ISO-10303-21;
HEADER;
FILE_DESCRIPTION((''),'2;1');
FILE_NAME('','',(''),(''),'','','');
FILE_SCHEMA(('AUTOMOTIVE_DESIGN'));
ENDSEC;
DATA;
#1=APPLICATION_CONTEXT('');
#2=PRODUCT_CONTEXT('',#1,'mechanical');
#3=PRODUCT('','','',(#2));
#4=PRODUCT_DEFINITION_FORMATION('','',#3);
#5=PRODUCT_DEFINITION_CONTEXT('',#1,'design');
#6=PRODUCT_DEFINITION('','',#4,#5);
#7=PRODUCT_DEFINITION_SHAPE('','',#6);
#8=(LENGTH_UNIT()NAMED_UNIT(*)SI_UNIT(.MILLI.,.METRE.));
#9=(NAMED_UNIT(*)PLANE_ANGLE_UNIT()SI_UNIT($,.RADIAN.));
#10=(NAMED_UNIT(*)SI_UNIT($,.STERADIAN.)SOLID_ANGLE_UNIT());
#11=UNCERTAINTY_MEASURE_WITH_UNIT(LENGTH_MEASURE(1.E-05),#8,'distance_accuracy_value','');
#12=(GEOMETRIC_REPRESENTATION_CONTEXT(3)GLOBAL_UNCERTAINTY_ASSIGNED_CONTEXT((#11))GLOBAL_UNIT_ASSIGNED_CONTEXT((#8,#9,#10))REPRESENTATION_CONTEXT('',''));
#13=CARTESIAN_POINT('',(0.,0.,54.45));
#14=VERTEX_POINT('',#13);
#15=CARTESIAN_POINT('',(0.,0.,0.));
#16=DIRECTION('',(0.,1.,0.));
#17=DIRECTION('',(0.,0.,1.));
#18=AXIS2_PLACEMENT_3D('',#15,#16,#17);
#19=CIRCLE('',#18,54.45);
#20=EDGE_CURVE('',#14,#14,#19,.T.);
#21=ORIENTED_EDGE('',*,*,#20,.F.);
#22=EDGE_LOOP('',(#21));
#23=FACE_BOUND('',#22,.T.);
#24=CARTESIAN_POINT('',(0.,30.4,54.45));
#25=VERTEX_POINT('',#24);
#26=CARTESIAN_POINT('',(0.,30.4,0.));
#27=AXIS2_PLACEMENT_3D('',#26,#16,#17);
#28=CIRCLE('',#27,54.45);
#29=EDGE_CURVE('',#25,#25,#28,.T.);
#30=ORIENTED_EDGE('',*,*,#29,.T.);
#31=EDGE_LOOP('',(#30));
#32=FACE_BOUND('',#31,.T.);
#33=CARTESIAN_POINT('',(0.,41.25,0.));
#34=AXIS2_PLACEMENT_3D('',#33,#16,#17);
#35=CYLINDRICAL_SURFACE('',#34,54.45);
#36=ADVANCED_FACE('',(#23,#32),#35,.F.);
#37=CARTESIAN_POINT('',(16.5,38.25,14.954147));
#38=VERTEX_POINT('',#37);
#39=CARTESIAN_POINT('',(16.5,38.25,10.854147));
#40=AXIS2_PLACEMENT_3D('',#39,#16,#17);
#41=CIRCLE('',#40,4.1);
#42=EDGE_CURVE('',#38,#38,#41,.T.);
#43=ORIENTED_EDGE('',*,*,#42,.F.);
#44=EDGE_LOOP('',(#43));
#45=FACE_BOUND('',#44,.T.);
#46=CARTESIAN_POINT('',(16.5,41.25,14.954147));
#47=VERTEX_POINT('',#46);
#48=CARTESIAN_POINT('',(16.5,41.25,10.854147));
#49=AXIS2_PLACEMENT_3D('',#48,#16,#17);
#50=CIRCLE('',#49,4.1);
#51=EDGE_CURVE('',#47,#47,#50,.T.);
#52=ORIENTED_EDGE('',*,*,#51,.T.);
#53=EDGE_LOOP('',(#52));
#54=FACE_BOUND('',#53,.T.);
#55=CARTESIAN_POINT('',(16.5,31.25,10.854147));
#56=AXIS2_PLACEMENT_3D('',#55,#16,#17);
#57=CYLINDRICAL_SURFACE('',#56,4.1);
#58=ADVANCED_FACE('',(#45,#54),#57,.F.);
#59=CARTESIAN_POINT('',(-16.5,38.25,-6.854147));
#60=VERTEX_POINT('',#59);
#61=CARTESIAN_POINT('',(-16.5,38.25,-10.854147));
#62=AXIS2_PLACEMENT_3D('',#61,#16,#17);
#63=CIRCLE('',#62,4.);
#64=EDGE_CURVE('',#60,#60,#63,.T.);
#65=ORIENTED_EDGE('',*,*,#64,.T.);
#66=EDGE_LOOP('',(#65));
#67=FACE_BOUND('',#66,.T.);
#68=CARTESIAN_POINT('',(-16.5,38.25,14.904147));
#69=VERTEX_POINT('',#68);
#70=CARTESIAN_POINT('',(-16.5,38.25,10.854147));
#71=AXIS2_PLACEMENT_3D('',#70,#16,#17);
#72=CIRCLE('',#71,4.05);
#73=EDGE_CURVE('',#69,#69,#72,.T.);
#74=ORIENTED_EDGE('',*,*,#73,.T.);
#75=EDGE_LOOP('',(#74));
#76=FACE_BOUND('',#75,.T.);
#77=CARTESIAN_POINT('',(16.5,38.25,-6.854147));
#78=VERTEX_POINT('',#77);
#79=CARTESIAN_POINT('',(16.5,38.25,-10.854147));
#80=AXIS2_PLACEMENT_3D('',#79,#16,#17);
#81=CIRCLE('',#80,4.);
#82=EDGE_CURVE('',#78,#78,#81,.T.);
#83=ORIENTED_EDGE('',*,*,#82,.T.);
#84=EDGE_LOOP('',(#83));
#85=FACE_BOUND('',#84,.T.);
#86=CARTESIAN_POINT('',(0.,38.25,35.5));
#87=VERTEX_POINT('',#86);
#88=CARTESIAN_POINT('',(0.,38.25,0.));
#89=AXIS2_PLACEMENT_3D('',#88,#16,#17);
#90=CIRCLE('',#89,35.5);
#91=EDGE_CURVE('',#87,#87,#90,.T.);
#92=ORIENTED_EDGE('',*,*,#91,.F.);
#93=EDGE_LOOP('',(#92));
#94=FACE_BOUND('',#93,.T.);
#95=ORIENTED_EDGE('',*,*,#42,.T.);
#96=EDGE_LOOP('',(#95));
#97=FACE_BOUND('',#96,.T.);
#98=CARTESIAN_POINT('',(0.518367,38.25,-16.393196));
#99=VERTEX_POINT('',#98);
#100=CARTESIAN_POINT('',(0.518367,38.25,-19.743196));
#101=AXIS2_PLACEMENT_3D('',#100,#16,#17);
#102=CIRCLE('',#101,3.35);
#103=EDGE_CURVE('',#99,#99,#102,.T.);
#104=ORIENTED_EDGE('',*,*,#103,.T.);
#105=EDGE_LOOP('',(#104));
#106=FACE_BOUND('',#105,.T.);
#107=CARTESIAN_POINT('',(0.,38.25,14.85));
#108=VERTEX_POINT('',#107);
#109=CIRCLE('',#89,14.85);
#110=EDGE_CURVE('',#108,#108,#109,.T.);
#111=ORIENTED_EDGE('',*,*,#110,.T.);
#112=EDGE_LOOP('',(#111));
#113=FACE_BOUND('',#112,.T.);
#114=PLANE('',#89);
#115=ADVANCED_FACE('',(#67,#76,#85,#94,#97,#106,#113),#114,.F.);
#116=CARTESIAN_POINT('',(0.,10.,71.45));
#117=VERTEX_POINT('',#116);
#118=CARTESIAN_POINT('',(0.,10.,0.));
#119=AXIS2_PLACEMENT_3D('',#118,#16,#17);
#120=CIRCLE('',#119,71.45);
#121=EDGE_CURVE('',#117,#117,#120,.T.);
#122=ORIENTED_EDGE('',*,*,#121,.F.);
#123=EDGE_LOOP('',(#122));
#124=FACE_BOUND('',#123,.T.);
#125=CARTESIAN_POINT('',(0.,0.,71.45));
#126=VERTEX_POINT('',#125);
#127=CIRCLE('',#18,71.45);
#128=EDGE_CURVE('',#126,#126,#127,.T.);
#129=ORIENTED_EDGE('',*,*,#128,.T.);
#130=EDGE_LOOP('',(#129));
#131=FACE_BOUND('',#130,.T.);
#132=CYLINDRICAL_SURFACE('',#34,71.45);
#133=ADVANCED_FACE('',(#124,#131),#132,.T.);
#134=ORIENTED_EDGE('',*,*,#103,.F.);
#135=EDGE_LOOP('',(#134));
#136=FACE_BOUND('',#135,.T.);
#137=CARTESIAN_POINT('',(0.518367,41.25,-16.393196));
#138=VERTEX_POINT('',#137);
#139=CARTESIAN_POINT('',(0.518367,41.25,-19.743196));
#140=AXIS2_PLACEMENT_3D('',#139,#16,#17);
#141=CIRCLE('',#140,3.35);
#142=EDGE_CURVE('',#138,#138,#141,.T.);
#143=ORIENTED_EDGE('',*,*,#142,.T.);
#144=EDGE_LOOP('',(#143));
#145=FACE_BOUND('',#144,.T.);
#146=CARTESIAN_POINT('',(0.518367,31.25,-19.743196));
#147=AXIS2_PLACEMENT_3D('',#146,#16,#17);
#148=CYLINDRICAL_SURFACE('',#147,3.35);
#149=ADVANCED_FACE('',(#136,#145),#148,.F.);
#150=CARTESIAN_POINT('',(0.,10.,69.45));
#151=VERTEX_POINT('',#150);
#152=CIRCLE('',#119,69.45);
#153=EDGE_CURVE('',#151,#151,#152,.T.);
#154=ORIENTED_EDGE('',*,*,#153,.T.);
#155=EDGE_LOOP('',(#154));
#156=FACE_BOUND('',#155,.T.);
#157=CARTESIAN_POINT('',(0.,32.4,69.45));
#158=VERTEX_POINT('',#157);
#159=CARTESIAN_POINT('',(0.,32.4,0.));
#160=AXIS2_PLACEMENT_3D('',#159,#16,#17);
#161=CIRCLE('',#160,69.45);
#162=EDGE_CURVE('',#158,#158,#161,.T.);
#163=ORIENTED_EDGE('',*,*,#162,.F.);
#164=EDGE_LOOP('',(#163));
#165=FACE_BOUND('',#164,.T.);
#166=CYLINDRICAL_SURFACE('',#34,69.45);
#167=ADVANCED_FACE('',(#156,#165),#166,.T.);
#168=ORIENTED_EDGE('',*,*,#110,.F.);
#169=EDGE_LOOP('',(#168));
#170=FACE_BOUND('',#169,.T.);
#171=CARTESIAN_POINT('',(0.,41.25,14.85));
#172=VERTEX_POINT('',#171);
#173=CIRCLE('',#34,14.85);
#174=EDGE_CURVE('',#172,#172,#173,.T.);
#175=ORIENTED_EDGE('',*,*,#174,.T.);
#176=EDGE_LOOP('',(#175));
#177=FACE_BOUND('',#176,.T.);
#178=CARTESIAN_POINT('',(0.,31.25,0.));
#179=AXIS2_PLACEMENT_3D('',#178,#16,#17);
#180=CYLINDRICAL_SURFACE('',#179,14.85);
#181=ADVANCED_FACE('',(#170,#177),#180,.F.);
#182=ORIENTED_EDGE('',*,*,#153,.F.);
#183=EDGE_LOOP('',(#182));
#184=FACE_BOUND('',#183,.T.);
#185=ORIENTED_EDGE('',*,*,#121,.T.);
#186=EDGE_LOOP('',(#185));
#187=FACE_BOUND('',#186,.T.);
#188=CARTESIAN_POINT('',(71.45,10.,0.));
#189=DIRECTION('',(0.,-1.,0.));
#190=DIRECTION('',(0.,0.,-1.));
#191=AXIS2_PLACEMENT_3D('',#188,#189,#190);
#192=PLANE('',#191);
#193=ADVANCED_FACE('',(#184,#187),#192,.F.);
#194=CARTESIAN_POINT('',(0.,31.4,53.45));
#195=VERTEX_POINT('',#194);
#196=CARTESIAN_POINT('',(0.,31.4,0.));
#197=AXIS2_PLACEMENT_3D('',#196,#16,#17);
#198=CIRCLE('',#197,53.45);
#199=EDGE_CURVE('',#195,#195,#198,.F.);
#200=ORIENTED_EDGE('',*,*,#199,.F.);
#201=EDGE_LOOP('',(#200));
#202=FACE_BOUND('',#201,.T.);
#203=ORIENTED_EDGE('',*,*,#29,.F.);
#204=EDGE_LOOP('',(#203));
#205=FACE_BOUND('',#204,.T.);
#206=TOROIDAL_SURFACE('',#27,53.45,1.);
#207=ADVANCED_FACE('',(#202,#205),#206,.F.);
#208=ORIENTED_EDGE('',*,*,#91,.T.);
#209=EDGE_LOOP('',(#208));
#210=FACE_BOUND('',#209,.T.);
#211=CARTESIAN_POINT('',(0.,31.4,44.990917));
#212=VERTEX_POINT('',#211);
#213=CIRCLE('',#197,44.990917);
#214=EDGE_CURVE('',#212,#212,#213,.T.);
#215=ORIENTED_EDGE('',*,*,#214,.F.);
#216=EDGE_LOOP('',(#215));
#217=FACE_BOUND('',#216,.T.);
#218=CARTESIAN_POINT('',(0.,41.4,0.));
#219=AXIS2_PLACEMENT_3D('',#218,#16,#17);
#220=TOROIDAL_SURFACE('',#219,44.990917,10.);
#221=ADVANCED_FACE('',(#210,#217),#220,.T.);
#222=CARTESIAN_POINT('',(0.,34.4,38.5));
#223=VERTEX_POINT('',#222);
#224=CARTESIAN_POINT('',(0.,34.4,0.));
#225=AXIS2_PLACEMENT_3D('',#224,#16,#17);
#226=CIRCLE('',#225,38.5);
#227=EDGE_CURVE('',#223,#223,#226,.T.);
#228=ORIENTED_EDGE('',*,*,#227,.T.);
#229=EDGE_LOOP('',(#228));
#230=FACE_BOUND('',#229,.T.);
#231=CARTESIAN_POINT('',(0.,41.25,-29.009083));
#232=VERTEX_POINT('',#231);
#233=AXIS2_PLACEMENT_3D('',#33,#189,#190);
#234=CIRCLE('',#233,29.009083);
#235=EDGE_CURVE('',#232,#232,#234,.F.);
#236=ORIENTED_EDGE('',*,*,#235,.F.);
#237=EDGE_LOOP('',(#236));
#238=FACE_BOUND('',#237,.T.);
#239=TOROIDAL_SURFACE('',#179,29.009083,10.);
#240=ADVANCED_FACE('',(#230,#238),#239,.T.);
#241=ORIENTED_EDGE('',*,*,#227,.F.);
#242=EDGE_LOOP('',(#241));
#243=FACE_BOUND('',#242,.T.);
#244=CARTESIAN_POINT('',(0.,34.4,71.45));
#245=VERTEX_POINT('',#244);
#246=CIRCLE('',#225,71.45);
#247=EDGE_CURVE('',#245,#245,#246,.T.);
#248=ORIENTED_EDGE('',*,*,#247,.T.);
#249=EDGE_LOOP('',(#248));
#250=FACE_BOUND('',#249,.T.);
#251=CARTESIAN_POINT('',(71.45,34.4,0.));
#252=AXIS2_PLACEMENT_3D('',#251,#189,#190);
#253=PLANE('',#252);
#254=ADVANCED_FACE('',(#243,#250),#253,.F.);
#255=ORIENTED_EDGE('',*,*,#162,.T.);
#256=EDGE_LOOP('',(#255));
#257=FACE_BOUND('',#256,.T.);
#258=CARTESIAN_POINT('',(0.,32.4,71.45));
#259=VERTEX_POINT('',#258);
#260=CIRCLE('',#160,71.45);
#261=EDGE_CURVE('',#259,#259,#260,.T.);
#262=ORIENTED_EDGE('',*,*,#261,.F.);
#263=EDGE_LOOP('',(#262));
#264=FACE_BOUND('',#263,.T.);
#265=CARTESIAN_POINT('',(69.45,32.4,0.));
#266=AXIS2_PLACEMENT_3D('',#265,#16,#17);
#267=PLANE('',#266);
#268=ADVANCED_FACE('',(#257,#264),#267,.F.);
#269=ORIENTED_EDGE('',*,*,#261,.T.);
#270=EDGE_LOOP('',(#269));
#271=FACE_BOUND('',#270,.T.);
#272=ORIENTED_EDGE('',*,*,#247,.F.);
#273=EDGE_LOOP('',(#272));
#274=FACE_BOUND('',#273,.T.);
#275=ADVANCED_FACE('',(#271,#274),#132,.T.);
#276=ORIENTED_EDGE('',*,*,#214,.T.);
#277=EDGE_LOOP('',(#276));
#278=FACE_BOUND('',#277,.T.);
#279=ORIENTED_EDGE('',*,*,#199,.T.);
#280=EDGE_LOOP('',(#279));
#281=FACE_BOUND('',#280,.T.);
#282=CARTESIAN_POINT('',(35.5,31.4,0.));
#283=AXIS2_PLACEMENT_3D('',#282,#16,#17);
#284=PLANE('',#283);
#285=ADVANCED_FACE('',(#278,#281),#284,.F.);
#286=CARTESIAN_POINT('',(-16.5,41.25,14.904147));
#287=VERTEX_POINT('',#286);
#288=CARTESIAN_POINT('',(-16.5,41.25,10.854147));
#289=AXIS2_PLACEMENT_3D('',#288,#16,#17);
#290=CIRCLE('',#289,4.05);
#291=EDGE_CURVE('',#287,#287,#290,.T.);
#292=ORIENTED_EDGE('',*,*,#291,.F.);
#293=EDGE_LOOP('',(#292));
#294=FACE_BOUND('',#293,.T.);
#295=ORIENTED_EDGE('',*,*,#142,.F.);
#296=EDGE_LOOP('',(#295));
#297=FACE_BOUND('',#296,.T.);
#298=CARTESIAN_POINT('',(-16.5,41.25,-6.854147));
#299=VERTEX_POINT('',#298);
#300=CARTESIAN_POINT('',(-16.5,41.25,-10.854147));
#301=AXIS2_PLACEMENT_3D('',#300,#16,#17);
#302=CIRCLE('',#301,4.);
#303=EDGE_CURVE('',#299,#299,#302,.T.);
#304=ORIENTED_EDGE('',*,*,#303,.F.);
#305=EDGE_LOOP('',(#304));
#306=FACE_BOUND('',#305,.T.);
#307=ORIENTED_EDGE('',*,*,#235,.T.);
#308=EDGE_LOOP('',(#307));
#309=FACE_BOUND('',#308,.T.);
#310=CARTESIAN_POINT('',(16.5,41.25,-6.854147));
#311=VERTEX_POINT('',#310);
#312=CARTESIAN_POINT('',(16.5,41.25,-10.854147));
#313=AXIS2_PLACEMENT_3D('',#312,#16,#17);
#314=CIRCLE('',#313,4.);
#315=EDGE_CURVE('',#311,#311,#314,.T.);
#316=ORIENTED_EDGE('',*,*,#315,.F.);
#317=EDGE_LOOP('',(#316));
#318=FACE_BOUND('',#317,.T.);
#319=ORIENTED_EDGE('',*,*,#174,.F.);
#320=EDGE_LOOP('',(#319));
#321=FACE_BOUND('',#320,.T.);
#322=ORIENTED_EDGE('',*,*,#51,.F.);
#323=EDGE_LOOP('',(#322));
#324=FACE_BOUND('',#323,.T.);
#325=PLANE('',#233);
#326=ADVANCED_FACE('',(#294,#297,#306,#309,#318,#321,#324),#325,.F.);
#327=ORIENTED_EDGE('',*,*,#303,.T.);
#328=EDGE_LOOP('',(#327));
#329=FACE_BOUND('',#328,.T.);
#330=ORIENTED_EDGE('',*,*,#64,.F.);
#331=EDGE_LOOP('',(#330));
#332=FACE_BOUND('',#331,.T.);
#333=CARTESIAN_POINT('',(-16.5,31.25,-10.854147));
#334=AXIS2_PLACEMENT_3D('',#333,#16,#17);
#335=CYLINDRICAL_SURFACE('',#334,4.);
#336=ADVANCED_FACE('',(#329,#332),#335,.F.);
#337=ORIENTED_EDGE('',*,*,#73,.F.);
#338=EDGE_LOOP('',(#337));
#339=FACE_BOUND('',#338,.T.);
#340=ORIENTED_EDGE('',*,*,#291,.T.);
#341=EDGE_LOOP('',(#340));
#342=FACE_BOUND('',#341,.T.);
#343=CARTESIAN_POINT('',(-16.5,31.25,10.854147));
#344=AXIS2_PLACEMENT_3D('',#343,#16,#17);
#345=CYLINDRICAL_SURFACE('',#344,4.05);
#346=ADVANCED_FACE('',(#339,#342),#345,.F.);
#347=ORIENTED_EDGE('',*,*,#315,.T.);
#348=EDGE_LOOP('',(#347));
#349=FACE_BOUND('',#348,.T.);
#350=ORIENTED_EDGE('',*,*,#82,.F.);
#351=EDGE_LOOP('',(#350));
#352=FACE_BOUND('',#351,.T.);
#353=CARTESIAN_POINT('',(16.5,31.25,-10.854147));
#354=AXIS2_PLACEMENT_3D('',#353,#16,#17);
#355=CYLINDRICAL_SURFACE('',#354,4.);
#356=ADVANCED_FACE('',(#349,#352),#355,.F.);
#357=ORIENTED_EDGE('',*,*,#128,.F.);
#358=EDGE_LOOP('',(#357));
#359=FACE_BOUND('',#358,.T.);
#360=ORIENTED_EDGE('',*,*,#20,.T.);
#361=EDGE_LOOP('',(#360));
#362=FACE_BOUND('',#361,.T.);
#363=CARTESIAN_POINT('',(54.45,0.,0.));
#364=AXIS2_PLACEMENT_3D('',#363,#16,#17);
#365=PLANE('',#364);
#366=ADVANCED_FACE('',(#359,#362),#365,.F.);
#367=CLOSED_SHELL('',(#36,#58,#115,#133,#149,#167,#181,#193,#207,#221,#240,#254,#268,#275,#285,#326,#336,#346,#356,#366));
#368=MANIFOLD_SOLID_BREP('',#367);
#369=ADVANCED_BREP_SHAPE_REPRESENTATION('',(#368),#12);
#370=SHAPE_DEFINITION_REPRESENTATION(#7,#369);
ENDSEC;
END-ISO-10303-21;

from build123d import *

# Parameters (mm, degrees)
REDONDEO2_R           = 10
CROQUIS3_R            = 14.85
CORTAR_EXTRUIR1_DEPTH = 10
CROQUIS4_R            = 3.35
CROQUIS4_R_2          = 4
CROQUIS4_R_3          = 4.1
CROQUIS4_R_4          = 4.05
CORTAR_EXTRUIR2_DEPTH = 10
REDONDEO3_R           = 10
REDONDEO4_R           = 1


with BuildPart() as part:
    # Croquis2 → Revolución1 (revolve)
    with BuildSketch(Plane.XY, mode=Mode.PRIVATE) as revoluci_n1_sk:
        Polygon((54.45, 0), (71.45, 0), (71.45, 10), (69.45, 10), (69.45, 32.4), (71.45, 32.4), (71.45, 34.4), (38.5, 34.4), (38.5, 41.25), (0, 41.25), (0, 38.25), (35.5, 38.25), (35.5, 31.4), (54.45, 31.4), align=None)
    revolve(revoluci_n1_sk.sketch.rotate(Axis((0, 41.25, 0), (0, -1, 0)), 90), axis=Axis((0, 41.25, 0), (0, -1, 0)))

    # Redondeo2
    # the kernel refuses this fillet: 10 mm, written as the material it takes off along each edge
    with BuildSketch(Plane(origin=(0, 41.25, 0), x_dir=(0, 0, 1), z_dir=(1, 0, 0))) as redondeo2_piece_1:
        with BuildLine():
            CenterArc((29.00908329, 10), REDONDEO2_R, 270, 71.639186206)
            Line((29.00908329, 0), (29.00908329, -0.2))
            Line((29.00908329, -0.2), (38.5, -0.2))
            Line((38.5, -0.2), (38.7, 0))
            ThreePointArc((38.7, 0), (38.7, 3.425), (38.689818334, 6.787))
            Line((38.689818334, 6.787), (38.5, 6.85))
        make_face()
    revolve(axis=Axis((0, 41.25, 0), (0, -1, 0)), mode=Mode.SUBTRACT)

    # Croquis3 → Cortar-Extruir1 (cut)
    with BuildSketch(Plane(origin=(0, 41.25, 0), x_dir=(1, 0, 0), z_dir=(0, 1, 0))):
        with Locations(Location((0, 0, 0), (0, 0, 270))):
            Circle(CROQUIS3_R)
    extrude(amount=-CORTAR_EXTRUIR1_DEPTH, mode=Mode.SUBTRACT)

    # Croquis4 → Cortar-Extruir2 (cut)
    with BuildSketch(Plane(origin=(0, 41.25, 0), x_dir=(1, 0, 0), z_dir=(0, 1, 0))):
        with Locations(Location((0.518366506, 19.743196199, 0), (0, 0, 270))):
            Circle(CROQUIS4_R)
        with Locations(Location((-16.5, 10.854146673, 0), (0, 0, 270))):
            Circle(CROQUIS4_R_2)
        with Locations(Location((16.5, 10.854146673, 0), (0, 0, 270))):
            Circle(CROQUIS4_R_2)
        with Locations(Location((16.5, -10.854146673, 0), (0, 0, 270))):
            Circle(CROQUIS4_R_3)
        with Locations(Location((-16.5, -10.854146673, 0), (0, 0, 270))):
            Circle(CROQUIS4_R_4)
    extrude(amount=-CORTAR_EXTRUIR2_DEPTH, mode=Mode.SUBTRACT)

    # Redondeo3
    # the kernel refuses this fillet: 10 mm, written as the material it takes off along each edge
    with BuildSketch(Plane(origin=(0, 31.4, 0), x_dir=(0, 0, 1), z_dir=(1, 0, 0))) as redondeo3_piece_1:
        with BuildLine():
            CenterArc((44.99091671, -10), REDONDEO3_R, 90, 71.639186206)
            Line((35.5, -6.85), (35.310181666, -6.787))
            ThreePointArc((35.310181666, -6.787), (35.3, -3.425), (35.3, 0))
            Line((35.3, 0), (35.5, 0.2))
            Line((35.5, 0.2), (44.99091671, 0.2))
            Line((44.99091671, 0.2), (44.99091671, 0))
        make_face()
    revolve(axis=Axis((0, 31.4, 0), (0, -1, 0)), mode=Mode.SUBTRACT)

    # Redondeo4
    redondeo4_edges = [part.edges().sort_by_distance(p)[0] for p in [
        (0, 31.4, -54.45),
    ]]
    fillet(redondeo4_edges, radius=REDONDEO4_R)


solid = part.part
